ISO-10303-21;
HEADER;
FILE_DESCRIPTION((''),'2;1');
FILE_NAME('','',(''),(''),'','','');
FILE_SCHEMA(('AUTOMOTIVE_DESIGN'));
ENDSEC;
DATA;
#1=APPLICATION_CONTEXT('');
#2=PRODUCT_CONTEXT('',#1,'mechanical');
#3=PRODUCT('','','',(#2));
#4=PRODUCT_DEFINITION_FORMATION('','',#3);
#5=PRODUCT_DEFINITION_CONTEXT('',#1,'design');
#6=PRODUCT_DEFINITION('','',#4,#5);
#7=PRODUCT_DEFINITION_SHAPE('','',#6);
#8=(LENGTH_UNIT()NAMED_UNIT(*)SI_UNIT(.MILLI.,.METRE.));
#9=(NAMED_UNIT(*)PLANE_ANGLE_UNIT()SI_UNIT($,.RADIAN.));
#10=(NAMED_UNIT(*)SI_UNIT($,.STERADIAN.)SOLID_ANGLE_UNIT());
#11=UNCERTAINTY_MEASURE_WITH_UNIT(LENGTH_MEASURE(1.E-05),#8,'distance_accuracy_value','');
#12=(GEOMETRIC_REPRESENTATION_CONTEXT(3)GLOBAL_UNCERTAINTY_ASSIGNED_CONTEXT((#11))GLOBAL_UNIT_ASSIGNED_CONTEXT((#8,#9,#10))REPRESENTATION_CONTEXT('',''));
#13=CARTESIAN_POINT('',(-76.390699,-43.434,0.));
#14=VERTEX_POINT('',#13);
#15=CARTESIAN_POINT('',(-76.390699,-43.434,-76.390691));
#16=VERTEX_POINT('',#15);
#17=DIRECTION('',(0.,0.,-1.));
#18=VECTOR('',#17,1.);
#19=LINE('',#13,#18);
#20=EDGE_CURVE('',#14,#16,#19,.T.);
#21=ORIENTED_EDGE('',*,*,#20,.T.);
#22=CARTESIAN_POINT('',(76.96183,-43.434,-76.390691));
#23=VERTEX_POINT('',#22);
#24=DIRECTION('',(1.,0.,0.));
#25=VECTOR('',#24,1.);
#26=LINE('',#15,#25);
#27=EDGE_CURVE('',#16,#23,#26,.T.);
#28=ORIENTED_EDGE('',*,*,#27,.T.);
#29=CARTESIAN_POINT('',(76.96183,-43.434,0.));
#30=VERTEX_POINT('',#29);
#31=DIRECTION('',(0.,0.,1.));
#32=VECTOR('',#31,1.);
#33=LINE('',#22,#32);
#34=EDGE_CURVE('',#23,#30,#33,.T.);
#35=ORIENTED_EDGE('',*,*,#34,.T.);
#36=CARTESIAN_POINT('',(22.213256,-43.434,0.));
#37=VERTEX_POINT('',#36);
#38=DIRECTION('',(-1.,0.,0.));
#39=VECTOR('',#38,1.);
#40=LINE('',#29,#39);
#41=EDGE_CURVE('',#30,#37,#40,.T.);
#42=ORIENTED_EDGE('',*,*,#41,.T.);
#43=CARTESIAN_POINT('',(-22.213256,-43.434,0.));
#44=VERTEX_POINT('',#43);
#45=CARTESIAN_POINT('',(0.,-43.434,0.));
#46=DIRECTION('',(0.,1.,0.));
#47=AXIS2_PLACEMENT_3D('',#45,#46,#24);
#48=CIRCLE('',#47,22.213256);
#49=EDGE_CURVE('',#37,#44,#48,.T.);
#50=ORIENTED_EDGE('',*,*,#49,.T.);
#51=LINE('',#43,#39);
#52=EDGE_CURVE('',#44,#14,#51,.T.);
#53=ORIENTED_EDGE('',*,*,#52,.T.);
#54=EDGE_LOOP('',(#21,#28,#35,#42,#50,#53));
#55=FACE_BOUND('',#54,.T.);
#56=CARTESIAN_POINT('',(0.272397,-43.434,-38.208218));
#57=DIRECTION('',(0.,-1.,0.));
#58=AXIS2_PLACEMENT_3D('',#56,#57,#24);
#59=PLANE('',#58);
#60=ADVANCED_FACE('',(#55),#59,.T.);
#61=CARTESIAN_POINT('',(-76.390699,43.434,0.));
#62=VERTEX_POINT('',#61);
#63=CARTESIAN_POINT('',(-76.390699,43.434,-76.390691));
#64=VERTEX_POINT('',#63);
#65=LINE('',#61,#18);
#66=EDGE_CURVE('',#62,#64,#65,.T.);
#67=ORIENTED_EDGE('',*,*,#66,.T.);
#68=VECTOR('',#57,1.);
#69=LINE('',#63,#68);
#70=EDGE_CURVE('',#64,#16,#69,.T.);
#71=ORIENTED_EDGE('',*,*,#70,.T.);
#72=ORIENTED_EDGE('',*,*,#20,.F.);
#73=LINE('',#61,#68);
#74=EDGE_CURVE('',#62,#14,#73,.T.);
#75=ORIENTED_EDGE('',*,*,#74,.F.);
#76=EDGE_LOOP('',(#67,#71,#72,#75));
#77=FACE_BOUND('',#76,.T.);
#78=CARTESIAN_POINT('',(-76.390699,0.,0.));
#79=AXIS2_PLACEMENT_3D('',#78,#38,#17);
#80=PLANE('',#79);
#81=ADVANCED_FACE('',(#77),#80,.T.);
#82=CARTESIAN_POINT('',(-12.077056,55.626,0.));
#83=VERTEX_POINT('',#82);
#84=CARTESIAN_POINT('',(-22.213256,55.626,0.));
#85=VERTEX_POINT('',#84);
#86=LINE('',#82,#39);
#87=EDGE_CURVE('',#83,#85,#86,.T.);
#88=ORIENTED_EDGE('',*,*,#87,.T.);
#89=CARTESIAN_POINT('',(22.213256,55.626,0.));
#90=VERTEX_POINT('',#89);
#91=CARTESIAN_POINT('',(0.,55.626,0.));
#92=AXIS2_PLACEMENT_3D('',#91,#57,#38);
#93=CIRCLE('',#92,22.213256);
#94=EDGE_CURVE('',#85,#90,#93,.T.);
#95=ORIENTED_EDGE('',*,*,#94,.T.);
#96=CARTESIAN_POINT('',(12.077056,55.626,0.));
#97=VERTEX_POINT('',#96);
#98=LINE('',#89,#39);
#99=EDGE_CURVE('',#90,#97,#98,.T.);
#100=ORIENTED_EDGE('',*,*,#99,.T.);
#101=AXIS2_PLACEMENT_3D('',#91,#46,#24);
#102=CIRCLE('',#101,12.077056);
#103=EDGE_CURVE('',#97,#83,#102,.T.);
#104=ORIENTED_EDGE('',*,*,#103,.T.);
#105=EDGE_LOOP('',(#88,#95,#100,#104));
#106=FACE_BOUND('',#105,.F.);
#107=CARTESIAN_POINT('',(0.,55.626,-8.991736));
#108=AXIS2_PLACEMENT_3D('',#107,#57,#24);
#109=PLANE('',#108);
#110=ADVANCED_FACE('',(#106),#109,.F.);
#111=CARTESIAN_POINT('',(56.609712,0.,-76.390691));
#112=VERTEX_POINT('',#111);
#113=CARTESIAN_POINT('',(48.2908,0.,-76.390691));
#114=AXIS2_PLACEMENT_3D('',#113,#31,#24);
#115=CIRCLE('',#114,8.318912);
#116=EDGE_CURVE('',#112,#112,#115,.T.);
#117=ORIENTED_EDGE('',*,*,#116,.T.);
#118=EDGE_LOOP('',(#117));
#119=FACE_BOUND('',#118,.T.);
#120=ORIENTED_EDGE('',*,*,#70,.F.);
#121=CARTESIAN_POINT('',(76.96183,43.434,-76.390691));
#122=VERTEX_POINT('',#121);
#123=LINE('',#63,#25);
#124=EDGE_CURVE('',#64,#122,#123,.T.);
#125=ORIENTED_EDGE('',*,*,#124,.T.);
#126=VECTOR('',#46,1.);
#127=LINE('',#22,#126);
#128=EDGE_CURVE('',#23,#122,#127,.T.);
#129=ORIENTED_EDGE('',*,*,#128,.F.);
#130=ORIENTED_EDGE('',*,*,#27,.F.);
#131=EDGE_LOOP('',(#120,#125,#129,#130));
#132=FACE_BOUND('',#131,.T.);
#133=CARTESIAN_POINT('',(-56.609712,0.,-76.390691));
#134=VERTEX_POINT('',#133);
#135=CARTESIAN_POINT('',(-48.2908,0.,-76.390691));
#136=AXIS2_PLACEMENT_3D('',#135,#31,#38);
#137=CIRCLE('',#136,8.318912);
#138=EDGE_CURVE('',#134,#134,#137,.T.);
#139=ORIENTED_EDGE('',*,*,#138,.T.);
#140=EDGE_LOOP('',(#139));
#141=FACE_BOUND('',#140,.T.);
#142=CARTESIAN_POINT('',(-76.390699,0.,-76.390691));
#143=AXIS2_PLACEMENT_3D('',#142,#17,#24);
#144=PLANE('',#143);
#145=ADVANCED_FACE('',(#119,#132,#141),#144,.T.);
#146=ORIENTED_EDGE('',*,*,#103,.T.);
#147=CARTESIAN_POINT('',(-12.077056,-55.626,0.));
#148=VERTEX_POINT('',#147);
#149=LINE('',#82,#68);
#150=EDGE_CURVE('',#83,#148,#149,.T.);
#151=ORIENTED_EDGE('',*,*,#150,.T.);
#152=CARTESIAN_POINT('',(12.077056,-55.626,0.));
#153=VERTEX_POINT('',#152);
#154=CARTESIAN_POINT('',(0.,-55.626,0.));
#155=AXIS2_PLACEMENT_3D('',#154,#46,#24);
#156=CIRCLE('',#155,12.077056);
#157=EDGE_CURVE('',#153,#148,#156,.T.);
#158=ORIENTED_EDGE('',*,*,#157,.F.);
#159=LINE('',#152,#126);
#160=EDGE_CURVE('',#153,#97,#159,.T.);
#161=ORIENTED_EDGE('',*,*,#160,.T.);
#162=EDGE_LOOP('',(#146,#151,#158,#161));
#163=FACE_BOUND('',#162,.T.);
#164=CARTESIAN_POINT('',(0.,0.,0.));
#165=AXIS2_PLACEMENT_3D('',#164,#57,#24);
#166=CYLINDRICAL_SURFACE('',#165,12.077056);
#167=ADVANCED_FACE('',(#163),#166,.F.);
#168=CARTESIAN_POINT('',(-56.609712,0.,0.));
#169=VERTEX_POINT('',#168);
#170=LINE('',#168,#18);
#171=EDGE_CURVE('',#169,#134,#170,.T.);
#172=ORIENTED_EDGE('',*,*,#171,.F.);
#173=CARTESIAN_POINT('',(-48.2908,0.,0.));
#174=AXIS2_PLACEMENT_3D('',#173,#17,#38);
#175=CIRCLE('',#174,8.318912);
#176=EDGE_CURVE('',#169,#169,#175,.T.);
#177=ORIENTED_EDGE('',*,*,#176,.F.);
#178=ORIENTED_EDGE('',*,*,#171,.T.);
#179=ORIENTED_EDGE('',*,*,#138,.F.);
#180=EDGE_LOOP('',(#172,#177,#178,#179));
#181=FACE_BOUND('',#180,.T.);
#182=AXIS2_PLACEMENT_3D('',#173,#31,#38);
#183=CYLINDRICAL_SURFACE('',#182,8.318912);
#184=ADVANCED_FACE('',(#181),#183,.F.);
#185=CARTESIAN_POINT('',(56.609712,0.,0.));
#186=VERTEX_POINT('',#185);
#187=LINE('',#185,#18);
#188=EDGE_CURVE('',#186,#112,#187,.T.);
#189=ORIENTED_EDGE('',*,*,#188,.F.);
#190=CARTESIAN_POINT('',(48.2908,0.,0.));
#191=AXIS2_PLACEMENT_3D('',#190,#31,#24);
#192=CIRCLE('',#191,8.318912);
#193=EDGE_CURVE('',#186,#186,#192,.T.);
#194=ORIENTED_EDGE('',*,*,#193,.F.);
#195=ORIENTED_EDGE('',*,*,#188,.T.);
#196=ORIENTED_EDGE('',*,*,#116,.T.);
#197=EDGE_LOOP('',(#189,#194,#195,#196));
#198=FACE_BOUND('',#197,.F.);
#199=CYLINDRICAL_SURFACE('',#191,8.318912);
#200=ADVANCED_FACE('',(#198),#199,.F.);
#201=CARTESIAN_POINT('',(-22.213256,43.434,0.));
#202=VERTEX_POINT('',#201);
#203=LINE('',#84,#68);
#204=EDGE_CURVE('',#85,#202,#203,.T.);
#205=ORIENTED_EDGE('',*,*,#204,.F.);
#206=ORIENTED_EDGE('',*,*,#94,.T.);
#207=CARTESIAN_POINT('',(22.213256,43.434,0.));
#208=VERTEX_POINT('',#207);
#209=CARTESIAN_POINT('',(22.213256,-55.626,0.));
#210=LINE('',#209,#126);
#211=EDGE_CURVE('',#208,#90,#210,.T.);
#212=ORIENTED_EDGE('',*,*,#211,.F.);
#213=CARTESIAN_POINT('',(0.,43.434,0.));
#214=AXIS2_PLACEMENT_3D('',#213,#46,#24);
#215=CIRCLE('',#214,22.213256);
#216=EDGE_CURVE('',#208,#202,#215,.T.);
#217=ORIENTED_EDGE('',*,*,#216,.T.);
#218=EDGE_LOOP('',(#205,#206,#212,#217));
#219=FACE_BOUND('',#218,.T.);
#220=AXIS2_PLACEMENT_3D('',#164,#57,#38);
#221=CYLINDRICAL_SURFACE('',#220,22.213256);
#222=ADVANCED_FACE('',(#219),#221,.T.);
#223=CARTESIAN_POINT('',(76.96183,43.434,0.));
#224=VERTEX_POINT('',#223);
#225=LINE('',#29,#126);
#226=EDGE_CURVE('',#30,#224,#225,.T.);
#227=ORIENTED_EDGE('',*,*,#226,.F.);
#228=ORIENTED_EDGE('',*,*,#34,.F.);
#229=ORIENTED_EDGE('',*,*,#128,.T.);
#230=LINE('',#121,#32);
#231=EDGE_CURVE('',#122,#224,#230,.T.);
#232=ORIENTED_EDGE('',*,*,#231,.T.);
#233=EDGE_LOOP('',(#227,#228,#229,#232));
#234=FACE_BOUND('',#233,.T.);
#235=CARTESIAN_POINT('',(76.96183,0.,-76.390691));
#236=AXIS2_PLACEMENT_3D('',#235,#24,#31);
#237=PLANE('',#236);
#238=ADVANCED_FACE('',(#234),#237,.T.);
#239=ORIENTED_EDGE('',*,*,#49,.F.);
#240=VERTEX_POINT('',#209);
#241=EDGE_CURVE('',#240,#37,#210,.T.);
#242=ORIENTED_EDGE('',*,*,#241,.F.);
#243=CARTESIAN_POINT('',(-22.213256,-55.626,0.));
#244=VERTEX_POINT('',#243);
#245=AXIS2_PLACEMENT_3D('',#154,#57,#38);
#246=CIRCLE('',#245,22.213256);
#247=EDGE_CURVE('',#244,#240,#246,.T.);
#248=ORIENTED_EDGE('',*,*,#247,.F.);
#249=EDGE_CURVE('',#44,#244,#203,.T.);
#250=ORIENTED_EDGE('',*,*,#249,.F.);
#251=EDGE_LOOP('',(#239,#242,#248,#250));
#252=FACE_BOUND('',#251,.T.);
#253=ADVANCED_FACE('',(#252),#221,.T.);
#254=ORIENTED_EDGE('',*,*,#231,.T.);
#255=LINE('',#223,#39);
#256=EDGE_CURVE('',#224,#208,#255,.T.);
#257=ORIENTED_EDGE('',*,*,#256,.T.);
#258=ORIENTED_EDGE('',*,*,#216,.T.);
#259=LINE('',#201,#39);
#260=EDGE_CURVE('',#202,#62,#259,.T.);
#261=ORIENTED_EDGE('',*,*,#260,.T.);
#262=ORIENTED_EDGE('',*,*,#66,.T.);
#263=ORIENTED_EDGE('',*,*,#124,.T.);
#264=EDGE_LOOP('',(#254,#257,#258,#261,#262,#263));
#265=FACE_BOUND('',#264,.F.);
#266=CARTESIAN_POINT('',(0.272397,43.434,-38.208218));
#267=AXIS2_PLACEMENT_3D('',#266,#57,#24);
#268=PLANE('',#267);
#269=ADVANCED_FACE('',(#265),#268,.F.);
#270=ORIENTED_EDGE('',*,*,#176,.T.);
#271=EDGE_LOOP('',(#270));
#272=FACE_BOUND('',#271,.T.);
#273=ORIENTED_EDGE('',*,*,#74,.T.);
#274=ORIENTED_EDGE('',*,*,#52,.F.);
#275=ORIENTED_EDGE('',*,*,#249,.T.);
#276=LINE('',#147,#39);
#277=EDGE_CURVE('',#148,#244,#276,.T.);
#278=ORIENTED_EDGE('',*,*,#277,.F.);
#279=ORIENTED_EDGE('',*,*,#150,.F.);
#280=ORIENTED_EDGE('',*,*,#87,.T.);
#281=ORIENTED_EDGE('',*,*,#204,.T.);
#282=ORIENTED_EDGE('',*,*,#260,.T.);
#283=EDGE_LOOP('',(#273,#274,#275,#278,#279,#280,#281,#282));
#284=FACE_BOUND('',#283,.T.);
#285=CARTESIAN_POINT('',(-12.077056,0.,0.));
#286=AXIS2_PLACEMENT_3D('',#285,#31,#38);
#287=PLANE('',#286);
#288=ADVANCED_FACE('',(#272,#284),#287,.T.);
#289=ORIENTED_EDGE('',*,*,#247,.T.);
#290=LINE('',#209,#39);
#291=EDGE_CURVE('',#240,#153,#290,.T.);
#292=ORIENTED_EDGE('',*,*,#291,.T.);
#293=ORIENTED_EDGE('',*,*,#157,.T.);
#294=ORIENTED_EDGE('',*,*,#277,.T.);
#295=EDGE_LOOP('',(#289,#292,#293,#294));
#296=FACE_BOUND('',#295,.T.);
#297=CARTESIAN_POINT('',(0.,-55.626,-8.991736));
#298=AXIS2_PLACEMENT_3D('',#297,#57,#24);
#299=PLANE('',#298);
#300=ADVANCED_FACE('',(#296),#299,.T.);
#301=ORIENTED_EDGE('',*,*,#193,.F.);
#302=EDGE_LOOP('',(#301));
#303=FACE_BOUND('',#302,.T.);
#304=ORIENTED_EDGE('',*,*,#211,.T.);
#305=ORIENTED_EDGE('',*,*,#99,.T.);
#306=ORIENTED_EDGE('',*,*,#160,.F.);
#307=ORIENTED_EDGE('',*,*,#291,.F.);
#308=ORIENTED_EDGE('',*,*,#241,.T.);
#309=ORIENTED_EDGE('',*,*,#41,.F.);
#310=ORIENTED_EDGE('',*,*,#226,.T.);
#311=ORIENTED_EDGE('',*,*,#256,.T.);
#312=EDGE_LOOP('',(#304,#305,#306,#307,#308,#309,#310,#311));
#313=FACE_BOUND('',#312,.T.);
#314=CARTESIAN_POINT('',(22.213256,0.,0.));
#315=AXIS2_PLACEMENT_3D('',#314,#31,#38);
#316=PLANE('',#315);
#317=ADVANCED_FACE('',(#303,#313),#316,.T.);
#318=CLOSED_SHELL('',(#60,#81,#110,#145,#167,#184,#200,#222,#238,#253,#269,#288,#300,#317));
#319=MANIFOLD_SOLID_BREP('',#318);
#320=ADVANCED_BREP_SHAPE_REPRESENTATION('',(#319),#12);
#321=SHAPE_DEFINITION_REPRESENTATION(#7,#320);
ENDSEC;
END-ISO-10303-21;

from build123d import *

# Parameters (mm, degrees)
F1_DEPTH = 43.434
F2_DEPTH = 55.626
F3_R     = 8.3189115378
F4_DEPTH = 76.3916911016


# Not quite as in the source:
# - a pattern or mirror of a feature is missing from the dataset's text; its kind, count and spacing are read off the source's solid


with BuildPart() as f1:
    # F0 (on Front) → F1 (new body, symmetric)
    with BuildSketch(Plane.XZ):
        with BuildLine():
            ThreePointArc((22.2132560443, 0), (0, -22.2132560443), (-22.2132560443, 0))
            Line((-22.2132560443, 0), (-76.3906985521, 0))
            Line((-76.3906985521, 0), (-76.3906985521, -76.3906911016))
            Line((-76.3906985521, -76.3906911016), (76.9618302584, -76.3906911016))
            Line((76.9618302584, -76.3906911016), (76.9618302584, 0))
            Line((76.9618302584, 0), (22.2132560443, 0))
        make_face()
    extrude(amount=F1_DEPTH, both=True)

    # F0 (on Front) → F2 (join, symmetric)
    with BuildSketch(Plane.XZ):
        with BuildLine():
            ThreePointArc((12.0770555024, 0), (0, -12.0770555024), (-12.0770555024, 0))
            Line((-12.0770555024, 0), (-22.2132560443, 0))
            ThreePointArc((-22.2132560443, 0), (0, -22.2132560443), (22.2132560443, 0))
            Line((22.2132560443, 0), (12.0770555024, 0))
        make_face()
    extrude(amount=F2_DEPTH, both=True)

    # F3 (on face) → F4 (cut, through all)
    with BuildSketch(Plane.XY):
        with Locations((48.2908003032, 0)):
            Circle(F3_R)
    f4 = extrude(amount=-F4_DEPTH, mode=Mode.SUBTRACT)

    # F4_copies: F4 across plane
    add(f4.mirror(Plane(origin=(0, 0, 0), x_dir=(0, 0, -1), z_dir=(-1, 0, 0))), mode=Mode.SUBTRACT)


solid = f1.part
